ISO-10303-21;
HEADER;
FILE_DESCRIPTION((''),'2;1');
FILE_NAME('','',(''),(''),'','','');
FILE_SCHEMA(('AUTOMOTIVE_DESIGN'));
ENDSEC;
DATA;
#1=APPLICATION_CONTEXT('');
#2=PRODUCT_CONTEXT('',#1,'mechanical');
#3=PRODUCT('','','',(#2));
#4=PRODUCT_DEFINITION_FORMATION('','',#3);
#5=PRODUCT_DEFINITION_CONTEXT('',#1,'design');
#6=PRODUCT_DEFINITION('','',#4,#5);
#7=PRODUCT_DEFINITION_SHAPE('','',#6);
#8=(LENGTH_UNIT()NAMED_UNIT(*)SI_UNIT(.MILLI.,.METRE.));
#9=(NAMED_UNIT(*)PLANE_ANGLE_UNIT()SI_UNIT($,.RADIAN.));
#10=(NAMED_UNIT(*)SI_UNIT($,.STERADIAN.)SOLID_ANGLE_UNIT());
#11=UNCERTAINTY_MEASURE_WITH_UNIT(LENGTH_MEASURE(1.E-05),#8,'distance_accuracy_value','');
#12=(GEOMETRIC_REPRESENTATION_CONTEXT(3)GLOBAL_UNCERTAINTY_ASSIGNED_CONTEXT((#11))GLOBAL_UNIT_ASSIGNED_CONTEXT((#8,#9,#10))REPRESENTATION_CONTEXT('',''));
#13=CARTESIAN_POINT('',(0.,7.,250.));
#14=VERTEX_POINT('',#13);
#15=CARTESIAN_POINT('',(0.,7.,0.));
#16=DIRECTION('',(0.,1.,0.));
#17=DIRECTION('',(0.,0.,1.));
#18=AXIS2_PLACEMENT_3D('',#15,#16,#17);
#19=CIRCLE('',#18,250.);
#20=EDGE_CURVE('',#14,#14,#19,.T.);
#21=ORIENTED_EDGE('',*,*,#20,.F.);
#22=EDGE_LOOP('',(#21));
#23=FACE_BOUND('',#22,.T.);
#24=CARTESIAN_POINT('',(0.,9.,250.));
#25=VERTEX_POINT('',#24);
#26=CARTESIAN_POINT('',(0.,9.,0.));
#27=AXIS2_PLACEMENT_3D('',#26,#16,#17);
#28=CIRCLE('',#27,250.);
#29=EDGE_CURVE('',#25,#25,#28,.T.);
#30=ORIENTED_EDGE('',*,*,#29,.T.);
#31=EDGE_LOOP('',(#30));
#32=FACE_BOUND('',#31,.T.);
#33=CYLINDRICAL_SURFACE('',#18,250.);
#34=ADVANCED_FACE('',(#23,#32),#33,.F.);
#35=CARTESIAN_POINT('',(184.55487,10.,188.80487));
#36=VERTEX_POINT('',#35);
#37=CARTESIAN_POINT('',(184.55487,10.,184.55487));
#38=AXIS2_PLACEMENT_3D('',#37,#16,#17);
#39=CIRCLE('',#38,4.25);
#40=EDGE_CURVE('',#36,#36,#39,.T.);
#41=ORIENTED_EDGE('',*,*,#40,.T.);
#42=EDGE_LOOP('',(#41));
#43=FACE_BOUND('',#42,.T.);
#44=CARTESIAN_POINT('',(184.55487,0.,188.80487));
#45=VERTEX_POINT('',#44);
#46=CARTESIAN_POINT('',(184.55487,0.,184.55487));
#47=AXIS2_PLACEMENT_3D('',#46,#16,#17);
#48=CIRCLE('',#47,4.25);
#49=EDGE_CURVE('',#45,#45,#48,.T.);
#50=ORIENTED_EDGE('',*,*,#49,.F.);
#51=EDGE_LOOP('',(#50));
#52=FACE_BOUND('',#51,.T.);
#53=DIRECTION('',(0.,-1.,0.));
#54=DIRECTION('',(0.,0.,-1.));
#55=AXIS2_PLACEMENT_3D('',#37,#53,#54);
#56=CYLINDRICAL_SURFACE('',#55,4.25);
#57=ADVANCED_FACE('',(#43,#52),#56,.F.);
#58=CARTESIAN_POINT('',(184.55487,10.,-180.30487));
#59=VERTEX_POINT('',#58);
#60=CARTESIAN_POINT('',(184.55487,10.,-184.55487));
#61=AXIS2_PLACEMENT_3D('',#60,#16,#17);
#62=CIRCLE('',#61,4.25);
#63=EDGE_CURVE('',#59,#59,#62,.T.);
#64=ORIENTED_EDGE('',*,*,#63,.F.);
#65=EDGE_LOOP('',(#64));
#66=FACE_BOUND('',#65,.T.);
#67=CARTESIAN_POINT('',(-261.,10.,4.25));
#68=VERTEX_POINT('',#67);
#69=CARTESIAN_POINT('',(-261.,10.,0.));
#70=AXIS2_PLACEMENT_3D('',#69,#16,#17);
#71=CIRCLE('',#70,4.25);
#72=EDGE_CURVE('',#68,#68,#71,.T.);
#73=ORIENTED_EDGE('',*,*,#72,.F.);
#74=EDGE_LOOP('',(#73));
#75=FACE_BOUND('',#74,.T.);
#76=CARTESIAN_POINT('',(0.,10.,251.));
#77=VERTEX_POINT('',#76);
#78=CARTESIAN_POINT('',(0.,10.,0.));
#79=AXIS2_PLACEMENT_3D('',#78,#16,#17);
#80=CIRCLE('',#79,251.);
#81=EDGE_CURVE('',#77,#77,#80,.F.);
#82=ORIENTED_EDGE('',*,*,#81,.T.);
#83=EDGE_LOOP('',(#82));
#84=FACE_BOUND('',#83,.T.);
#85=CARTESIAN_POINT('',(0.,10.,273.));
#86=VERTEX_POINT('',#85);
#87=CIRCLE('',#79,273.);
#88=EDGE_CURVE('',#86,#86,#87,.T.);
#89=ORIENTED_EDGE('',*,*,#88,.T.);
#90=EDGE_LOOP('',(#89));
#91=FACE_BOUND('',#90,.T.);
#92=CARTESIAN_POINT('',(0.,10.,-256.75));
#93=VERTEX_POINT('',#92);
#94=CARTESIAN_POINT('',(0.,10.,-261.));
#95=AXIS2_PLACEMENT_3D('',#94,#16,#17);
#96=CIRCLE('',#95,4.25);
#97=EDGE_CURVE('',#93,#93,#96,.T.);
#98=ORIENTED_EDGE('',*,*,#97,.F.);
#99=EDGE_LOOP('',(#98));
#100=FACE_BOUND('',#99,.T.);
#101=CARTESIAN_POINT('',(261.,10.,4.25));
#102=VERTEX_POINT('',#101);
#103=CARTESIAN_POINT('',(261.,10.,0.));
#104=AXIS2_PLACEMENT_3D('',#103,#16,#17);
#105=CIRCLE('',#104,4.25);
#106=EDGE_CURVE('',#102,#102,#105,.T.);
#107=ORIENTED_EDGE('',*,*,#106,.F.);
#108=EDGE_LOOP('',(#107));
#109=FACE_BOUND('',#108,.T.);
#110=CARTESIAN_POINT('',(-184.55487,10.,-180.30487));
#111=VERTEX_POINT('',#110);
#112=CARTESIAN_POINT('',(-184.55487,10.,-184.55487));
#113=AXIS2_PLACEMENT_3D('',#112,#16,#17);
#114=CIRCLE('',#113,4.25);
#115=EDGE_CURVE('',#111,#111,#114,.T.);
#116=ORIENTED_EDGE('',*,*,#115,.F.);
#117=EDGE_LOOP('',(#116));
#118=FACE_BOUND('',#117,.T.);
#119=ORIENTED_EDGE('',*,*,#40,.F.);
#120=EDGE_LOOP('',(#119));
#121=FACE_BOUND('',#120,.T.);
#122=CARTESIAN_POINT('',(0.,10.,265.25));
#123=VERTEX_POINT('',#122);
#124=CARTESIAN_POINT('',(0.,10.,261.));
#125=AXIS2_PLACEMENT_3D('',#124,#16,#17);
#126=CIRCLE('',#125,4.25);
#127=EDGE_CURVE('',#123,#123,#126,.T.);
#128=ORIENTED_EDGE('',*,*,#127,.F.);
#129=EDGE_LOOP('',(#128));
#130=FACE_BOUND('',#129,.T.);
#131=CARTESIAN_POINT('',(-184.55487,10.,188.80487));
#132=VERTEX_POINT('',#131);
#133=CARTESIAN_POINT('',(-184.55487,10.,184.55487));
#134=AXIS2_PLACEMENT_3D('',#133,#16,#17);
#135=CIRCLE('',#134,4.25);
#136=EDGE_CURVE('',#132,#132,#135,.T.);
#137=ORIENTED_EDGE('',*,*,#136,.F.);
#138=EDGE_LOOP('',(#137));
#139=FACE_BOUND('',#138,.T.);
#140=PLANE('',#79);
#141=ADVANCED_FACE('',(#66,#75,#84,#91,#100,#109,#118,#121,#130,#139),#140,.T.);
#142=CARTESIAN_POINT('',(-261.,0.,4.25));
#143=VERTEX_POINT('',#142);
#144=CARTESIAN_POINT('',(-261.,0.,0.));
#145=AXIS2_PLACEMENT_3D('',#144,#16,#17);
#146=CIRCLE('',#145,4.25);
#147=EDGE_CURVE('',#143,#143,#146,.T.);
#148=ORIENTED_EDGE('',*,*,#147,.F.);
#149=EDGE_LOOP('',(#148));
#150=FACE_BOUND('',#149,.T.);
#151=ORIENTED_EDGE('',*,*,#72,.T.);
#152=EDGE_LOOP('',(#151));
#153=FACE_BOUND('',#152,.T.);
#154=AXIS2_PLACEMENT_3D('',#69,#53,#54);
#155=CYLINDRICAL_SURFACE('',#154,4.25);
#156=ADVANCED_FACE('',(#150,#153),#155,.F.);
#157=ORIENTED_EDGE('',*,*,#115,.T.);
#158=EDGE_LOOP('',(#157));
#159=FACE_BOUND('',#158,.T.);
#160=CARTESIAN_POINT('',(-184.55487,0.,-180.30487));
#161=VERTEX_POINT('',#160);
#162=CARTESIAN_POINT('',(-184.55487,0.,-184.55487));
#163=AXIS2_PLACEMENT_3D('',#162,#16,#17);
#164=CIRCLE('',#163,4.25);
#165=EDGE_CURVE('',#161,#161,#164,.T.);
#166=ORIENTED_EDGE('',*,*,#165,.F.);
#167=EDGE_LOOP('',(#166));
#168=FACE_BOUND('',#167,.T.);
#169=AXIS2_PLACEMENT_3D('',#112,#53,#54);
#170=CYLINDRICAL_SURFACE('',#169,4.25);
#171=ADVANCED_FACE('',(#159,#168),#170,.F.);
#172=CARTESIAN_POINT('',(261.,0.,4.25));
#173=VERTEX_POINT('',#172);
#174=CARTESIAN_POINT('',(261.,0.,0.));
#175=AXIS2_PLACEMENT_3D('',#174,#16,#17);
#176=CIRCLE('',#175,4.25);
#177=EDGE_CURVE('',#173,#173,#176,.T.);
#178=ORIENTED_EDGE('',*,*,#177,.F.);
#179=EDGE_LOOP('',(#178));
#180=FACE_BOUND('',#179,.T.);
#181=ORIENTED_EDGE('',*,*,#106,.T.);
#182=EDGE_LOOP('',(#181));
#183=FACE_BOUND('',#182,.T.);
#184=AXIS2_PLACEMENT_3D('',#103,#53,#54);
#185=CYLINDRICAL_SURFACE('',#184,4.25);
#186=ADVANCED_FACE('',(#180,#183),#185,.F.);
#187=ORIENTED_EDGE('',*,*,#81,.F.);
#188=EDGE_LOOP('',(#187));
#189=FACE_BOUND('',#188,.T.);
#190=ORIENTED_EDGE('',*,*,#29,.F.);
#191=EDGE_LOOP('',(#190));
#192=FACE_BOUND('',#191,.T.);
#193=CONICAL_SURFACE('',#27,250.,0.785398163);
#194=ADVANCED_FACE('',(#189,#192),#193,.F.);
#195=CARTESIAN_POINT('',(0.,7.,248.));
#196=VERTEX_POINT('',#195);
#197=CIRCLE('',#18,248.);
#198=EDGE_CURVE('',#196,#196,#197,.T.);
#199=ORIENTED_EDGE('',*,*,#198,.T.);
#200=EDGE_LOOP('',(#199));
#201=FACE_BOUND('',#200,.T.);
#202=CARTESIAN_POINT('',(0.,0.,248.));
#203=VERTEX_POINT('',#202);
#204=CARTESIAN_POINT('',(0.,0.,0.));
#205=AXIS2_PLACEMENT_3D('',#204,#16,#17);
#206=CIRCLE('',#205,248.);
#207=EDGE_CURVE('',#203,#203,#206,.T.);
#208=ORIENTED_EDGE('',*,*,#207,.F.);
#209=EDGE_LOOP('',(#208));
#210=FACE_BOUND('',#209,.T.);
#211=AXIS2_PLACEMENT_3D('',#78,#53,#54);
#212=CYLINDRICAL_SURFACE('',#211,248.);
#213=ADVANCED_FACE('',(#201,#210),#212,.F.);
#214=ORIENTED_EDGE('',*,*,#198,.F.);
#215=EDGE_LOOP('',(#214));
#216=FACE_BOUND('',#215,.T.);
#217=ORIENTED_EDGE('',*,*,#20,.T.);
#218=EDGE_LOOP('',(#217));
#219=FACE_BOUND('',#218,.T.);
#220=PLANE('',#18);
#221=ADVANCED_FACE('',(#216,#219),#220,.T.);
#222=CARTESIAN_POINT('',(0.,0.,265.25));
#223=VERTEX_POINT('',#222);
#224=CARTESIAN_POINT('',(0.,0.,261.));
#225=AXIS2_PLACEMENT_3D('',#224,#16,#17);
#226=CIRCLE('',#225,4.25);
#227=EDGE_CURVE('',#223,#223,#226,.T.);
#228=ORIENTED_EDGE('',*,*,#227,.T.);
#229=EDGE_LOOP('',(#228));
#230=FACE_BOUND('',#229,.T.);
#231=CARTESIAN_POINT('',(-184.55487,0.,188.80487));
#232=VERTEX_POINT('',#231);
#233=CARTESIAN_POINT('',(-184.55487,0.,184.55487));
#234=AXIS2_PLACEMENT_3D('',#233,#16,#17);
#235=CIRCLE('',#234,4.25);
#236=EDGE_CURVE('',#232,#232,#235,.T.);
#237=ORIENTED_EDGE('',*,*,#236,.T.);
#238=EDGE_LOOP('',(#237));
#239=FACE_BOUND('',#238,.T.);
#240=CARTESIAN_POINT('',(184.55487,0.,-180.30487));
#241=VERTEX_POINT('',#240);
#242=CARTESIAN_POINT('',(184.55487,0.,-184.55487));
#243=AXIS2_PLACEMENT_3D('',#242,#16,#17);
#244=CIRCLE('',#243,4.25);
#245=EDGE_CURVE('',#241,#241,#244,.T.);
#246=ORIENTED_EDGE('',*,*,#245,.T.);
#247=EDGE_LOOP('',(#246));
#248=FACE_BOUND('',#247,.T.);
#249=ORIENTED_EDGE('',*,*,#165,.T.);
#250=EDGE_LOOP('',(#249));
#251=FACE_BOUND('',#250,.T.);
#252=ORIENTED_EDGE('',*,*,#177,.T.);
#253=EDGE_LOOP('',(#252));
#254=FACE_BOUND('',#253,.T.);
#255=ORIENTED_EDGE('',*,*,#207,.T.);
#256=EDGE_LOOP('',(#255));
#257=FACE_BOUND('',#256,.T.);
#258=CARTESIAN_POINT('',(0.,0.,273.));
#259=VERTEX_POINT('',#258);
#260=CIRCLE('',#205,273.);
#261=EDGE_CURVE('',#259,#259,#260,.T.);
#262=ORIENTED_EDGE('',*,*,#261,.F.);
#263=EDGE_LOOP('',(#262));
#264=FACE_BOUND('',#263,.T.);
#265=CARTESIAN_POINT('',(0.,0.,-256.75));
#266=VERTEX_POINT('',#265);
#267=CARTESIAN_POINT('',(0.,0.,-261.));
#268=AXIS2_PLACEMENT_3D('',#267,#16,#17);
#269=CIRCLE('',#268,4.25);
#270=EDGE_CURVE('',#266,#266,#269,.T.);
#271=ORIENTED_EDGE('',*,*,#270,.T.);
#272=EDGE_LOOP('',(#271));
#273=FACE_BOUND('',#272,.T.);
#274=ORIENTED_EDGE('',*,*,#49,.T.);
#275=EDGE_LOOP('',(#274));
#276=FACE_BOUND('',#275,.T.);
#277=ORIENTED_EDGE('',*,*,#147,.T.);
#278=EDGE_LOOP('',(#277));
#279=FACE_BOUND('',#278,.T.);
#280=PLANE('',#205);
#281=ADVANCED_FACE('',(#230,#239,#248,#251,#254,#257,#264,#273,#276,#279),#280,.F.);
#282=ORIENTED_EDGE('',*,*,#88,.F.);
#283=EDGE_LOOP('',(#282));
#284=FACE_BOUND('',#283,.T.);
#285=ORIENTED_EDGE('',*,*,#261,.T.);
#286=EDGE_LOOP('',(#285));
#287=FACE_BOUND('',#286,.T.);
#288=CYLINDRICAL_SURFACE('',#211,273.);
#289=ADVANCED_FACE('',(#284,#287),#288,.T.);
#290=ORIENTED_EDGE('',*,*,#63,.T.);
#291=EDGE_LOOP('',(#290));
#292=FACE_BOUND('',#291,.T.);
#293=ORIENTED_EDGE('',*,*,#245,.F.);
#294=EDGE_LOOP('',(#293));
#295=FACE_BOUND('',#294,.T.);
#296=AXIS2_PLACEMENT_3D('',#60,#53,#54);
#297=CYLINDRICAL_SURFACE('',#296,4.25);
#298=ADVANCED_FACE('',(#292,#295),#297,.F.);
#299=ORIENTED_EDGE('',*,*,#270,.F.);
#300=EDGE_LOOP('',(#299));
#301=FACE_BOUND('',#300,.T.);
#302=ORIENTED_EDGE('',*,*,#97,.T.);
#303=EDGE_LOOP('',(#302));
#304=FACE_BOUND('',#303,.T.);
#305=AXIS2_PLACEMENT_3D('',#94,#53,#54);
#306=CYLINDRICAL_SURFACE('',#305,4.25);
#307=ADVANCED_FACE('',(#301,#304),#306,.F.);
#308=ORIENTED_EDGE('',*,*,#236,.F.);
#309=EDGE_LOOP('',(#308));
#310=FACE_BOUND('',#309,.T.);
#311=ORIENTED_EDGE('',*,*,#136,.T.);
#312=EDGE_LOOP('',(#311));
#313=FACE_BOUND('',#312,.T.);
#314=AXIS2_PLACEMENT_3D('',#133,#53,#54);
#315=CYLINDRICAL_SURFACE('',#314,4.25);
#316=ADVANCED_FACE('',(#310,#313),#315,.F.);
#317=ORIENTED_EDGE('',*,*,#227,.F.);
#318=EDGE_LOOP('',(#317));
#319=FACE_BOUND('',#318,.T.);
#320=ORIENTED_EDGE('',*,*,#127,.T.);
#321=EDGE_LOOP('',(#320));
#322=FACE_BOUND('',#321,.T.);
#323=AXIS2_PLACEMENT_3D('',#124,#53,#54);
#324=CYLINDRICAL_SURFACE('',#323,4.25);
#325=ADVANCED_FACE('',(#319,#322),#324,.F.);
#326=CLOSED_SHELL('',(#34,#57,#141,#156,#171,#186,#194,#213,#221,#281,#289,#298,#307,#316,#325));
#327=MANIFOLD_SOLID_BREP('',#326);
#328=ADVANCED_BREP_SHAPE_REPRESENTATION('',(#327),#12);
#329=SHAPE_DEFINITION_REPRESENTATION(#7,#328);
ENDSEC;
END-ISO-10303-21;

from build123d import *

# Parameters (mm, degrees)
BOSS_EXTRUDE1_OUTLINE_R   = 273
BOSS_EXTRUDE1_OUTLINE_R_2 = 4.25
BOSS_EXTRUDE1_OUTLINE_R_3 = 248
BOSS_EXTRUDE1_DEPTH       = 10
SKETCH2_R                 = 250
CUT_EXTRUDE1_DEPTH        = 3
CHAMFER1_SIZE             = 1


# Read off the part's stored shape, not the designer's step: Boss-Extrude1
with BuildPart() as part:
    # Boss-Extrude1 outline → Boss-Extrude1 (new body)
    with BuildSketch(Plane(origin=(0, 0, 0), x_dir=(1, 0, 0), z_dir=(0, 1, 0))):
        Circle(BOSS_EXTRUDE1_OUTLINE_R)
        with Locations((-184.55486989, -184.55486989)):
            Circle(BOSS_EXTRUDE1_OUTLINE_R_2, mode=Mode.SUBTRACT)
        with Locations((0, -261)):
            Circle(BOSS_EXTRUDE1_OUTLINE_R_2, mode=Mode.SUBTRACT)
        with Locations((184.55486989, -184.55486989)):
            Circle(BOSS_EXTRUDE1_OUTLINE_R_2, mode=Mode.SUBTRACT)
        with Locations((-261, 0)):
            Circle(BOSS_EXTRUDE1_OUTLINE_R_2, mode=Mode.SUBTRACT)
        with Locations((-184.55486989, 184.55486989)):
            Circle(BOSS_EXTRUDE1_OUTLINE_R_2, mode=Mode.SUBTRACT)
        Circle(BOSS_EXTRUDE1_OUTLINE_R_3, mode=Mode.SUBTRACT)
        with Locations((261, 0)):
            Circle(BOSS_EXTRUDE1_OUTLINE_R_2, mode=Mode.SUBTRACT)
        with Locations((0, 261)):
            Circle(BOSS_EXTRUDE1_OUTLINE_R_2, mode=Mode.SUBTRACT)
        with Locations((184.55486989, 184.55486989)):
            Circle(BOSS_EXTRUDE1_OUTLINE_R_2, mode=Mode.SUBTRACT)
    extrude(amount=BOSS_EXTRUDE1_DEPTH)

    # Sketch2 → Cut-Extrude1 (cut)
    with BuildSketch(Plane(origin=(0, 10, 0), x_dir=(1, 0, 0), z_dir=(0, 1, 0))):
        with Locations(Location((0, 0, 0), (0, 0, 270))):
            Circle(SKETCH2_R)
    extrude(amount=-CUT_EXTRUDE1_DEPTH, mode=Mode.SUBTRACT)

    # Chamfer1
    chamfer1_edges = [part.edges().sort_by_distance(p)[0] for p in [
        (0, 10, -250),
    ]]
    chamfer(chamfer1_edges, length=CHAMFER1_SIZE)


solid = part.part
